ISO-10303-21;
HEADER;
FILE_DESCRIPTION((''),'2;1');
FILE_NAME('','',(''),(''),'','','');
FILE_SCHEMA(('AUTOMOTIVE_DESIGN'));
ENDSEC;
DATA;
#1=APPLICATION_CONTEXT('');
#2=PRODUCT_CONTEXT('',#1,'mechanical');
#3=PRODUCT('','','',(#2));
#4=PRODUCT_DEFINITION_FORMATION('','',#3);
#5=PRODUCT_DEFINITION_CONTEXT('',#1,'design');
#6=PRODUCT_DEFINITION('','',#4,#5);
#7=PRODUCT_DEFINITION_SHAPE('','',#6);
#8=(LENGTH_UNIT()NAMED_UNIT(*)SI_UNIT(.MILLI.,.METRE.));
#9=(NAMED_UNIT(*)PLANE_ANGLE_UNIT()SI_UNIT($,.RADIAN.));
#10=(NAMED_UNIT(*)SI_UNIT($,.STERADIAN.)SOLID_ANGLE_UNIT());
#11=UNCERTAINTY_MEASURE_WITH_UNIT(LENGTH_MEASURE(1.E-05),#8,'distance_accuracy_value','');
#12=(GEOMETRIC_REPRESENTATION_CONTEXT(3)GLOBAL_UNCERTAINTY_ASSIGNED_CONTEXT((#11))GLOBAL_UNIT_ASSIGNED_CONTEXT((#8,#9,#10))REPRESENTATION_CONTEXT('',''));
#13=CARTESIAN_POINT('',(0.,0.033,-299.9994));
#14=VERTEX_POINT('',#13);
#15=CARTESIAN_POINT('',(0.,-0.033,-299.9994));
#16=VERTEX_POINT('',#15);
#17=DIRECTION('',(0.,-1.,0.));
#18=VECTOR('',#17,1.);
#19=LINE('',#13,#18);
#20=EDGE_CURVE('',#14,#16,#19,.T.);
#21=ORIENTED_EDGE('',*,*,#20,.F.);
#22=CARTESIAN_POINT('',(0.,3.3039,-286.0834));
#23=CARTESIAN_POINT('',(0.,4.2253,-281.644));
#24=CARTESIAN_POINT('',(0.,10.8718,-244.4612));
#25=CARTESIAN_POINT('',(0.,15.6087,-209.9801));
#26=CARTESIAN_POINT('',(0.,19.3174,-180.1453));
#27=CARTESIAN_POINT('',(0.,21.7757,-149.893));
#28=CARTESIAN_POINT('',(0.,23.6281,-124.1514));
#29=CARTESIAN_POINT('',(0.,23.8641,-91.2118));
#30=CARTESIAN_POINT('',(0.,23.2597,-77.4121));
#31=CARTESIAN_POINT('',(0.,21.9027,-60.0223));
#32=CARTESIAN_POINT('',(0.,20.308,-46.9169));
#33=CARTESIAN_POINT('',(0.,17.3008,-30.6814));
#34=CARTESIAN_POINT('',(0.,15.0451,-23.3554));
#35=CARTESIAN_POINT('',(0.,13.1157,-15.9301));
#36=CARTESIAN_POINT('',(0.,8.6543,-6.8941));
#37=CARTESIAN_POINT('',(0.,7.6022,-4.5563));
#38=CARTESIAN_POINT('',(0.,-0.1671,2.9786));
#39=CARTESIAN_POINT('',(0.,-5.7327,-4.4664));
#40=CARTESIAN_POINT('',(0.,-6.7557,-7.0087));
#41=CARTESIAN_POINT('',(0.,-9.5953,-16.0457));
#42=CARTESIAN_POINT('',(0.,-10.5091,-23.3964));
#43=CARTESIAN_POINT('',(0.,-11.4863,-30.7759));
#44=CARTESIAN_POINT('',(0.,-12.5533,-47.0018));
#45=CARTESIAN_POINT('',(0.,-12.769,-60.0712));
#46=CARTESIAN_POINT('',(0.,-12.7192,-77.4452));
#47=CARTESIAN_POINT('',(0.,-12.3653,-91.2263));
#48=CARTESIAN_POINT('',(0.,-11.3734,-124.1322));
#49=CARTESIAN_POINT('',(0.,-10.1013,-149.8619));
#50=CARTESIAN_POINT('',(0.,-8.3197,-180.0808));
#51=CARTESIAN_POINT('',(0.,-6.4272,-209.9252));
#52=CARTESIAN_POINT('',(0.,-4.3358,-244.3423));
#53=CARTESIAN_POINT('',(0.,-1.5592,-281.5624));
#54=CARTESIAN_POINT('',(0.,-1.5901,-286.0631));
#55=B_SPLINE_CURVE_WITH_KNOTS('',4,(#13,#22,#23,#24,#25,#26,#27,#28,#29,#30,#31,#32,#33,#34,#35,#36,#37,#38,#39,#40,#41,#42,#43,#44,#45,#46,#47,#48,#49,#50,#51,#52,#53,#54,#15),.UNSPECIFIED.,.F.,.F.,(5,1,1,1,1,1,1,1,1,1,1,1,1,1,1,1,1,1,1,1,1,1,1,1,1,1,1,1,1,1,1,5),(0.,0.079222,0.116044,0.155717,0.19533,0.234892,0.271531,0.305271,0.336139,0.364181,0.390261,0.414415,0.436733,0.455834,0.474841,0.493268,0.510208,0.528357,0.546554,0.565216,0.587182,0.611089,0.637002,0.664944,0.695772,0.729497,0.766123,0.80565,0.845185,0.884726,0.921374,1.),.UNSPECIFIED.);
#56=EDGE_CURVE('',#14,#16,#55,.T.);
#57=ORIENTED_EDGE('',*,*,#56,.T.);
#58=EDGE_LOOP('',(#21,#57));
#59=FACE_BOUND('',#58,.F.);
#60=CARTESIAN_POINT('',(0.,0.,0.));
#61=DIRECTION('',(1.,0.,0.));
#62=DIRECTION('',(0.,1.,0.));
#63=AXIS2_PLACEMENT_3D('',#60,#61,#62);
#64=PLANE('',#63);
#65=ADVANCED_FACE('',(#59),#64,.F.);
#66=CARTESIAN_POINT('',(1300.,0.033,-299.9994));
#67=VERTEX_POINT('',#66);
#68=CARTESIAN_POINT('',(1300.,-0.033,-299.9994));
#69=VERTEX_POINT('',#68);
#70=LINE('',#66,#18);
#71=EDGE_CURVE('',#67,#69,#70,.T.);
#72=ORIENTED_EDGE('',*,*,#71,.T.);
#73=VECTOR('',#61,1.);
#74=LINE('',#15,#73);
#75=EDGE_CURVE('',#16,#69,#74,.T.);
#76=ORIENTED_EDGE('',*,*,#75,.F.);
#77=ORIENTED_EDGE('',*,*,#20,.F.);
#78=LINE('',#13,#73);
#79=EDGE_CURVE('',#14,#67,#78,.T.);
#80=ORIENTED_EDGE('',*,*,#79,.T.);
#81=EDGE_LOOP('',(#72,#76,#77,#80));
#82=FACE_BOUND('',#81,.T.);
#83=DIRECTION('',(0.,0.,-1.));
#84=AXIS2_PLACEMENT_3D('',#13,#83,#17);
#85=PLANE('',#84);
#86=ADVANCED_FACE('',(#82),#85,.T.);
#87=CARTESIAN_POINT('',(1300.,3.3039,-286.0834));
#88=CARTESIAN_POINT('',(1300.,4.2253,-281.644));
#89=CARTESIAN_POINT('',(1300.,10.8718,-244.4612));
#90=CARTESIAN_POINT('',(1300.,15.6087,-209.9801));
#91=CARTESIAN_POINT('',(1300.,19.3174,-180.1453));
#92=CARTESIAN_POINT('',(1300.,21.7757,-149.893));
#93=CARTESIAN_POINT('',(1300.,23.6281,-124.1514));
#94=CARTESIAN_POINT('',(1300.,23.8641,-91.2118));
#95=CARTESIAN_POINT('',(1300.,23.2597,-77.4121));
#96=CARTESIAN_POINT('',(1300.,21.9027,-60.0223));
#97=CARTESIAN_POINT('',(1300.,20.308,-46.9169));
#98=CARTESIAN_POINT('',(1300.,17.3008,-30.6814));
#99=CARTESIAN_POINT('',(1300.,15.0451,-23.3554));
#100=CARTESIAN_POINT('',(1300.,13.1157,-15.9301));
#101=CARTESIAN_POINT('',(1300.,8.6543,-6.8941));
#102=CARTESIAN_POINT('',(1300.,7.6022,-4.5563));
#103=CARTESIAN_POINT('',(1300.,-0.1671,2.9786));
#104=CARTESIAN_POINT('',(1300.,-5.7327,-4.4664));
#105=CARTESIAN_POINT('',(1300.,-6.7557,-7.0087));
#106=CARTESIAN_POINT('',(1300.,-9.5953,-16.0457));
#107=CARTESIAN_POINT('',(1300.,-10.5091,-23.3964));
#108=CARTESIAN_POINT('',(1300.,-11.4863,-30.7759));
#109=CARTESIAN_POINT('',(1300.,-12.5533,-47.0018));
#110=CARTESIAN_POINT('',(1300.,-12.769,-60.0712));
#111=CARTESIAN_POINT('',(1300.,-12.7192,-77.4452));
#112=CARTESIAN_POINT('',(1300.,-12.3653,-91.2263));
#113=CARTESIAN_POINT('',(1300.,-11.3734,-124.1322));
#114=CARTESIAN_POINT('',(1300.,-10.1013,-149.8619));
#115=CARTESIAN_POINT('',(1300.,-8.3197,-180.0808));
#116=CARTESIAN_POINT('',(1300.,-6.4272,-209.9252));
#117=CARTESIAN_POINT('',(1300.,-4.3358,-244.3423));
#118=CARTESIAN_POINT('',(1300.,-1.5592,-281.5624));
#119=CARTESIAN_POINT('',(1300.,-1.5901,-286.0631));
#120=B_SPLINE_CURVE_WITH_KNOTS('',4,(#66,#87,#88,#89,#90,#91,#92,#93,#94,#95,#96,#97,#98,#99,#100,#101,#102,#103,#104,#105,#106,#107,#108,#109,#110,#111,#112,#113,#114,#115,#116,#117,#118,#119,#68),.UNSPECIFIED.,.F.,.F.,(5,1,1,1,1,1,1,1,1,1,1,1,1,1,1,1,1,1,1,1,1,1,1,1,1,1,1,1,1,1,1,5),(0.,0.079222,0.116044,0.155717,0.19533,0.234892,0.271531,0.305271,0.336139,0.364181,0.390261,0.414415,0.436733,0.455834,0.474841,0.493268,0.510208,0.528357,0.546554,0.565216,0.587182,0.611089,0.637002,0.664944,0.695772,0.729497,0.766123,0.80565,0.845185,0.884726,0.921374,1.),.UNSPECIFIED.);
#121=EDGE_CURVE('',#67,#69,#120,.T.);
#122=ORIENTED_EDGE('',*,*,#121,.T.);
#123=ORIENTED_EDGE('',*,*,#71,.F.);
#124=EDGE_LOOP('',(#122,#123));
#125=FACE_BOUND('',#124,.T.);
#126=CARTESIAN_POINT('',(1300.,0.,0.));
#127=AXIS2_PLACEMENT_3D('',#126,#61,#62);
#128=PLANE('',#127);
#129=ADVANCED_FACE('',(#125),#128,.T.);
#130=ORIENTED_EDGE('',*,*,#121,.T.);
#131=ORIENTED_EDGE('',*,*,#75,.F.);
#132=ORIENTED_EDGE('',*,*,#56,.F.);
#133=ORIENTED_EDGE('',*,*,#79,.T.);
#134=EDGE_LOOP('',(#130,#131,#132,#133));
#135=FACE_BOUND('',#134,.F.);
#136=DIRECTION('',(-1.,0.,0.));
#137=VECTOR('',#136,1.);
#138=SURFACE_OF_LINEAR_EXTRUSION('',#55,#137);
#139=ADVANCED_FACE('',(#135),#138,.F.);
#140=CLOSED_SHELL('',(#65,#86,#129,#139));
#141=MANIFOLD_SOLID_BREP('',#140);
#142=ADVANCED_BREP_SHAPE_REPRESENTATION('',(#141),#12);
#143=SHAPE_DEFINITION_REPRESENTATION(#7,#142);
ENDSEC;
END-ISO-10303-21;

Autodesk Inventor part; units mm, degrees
ref_plane "YZ Plane" through (0, 0, 0) normal (1, 0, 0) x (0, 1, 0)
ref_plane "XZ Plane" through (0, 0, 0) normal (0, 1, 0) x (-1, 0, 0)
ref_plane "XY Plane" through (0, 0, 0) normal (0, 0, 1) x (1, 0, 0)
sketch "Sketch2" plane through (0, 0, 0) normal (1, 0, 0) x (0, 1, 0)
  spline S0 degree 4 poles (0.033, -299.9994) (3.3039, -286.0834) (4.2253, -281.644) (10.8718, -244.4612) (15.6087, -209.9801) (19.3174, -180.1453) (21.7757, -149.893) (23.6281, -124.1514) (23.8641, -91.2118) (23.2597, -77.4121) (21.9027, -60.0223) (20.308, -46.9169) (17.3008, -30.6814) (15.0451, -23.3554) (13.1157, -15.9301) (8.6543, -6.8941) (7.6022, -4.5563) (-0.1671, 2.9786) (-5.7327, -4.4664) (-6.7557, -7.0087) (-9.5953, -16.0457) (-10.5091, -23.3964) (-11.4863, -30.7759) (-12.5533, -47.0018) (-12.769, -60.0712) (-12.7192, -77.4452) (-12.3653, -91.2263) (-11.3734, -124.1322) (-10.1013, -149.8619) (-8.3197, -180.0808) (-6.4272, -209.9252) (-4.3358, -244.3423) (-1.5592, -281.5624) (-1.5901, -286.0631) (-0.033, -299.9994) knots 0 0 0 0 0 0.079222 0.116044 0.155717 0.19533 0.234892 0.271531 0.305271 0.336139 0.364181 0.390261 0.414415 0.436733 0.455834 0.474841 0.493268 0.510208 0.528357 0.546554 0.565216 0.587182 0.611089 0.637002 0.664944 0.695772 0.729497 0.766123 0.80565 0.845185 0.884726 0.921374 1 1 1 1 1
  line L0 (0.033, -299.9994) -> (-0.033, -299.9994)
  line L1 (-0.033, 0.0006) -> (0, -299.9994) construction
  line L2 (23.6234, -180.0002) -> (23.6234, 0.0006) construction
  line L3 (-12.7065, -120.0004) -> (-12.7065, 0.0006) construction
  point P0 (0, 0)
  point P1 (3.4035, -284.9994)
  point P2 (6.2235, -269.9995)
  point P3 (11.2335, -239.9995)
  point P4 (15.5235, -209.9996)
  point P5 (19.0635, -179.9996)
  point P6 (21.7034, -149.9997)
  point P7 (23.3834, -119.9998)
  point P8 (23.6234, -89.9998)
  point P9 (22.9934, -74.9998)
  point P10 (21.7634, -59.9999)
  point P11 (19.8134, -44.9999)
  point P12 (16.8735, -29.9999)
  point P13 (14.8635, -22.5)
  point P14 (12.3735, -15)
  point P15 (8.9535, -7.5)
  point P16 (6.4335, -3.75)
  point P17 (-4.9665, -3.75)
  point P18 (-6.8265, -7.5)
  point P19 (-9.0465, -15)
  point P20 (-10.3965, -22.5)
  point P21 (-11.2665, -29.9999)
  point P22 (-12.3165, -44.9999)
  point P23 (-12.7065, -59.9999)
  point P24 (-12.6765, -74.9998)
  point P25 (-12.3765, -89.9998)
  point P26 (-11.4165, -119.9998)
  point P27 (-10.0365, -149.9997)
  point P28 (-8.2965, -179.9996)
  point P29 (-6.4365, -209.9996)
  point P30 (-4.5165, -239.9995)
  point P31 (-2.4765, -269.9995)
  point P32 (-1.4565, -284.9994)
  point P33 (-0.0165, -149.9997)
  point P34 (-0.0165, -75)
  dimension "d0" = 75
  dimension "d1" = 300
  dimension "d2" = 36.3299
extrude "Extrusion1" add sketch "Sketch2" along normal blind 1300
ref_plane "Work Plane1" through (0, 0, 0) normal (-1, 0, 0) x (0, 0, 1)
ref_plane "Work Plane3" through (1300, 0.033, -74.9994) normal (0, 0, -1) x (-1, 0, 0)
ref_plane "Work Plane2" through (1300, 0.033, 0.0006) normal (0, 0, -1) x (-1, 0, 0)
properties part number "Wing"
